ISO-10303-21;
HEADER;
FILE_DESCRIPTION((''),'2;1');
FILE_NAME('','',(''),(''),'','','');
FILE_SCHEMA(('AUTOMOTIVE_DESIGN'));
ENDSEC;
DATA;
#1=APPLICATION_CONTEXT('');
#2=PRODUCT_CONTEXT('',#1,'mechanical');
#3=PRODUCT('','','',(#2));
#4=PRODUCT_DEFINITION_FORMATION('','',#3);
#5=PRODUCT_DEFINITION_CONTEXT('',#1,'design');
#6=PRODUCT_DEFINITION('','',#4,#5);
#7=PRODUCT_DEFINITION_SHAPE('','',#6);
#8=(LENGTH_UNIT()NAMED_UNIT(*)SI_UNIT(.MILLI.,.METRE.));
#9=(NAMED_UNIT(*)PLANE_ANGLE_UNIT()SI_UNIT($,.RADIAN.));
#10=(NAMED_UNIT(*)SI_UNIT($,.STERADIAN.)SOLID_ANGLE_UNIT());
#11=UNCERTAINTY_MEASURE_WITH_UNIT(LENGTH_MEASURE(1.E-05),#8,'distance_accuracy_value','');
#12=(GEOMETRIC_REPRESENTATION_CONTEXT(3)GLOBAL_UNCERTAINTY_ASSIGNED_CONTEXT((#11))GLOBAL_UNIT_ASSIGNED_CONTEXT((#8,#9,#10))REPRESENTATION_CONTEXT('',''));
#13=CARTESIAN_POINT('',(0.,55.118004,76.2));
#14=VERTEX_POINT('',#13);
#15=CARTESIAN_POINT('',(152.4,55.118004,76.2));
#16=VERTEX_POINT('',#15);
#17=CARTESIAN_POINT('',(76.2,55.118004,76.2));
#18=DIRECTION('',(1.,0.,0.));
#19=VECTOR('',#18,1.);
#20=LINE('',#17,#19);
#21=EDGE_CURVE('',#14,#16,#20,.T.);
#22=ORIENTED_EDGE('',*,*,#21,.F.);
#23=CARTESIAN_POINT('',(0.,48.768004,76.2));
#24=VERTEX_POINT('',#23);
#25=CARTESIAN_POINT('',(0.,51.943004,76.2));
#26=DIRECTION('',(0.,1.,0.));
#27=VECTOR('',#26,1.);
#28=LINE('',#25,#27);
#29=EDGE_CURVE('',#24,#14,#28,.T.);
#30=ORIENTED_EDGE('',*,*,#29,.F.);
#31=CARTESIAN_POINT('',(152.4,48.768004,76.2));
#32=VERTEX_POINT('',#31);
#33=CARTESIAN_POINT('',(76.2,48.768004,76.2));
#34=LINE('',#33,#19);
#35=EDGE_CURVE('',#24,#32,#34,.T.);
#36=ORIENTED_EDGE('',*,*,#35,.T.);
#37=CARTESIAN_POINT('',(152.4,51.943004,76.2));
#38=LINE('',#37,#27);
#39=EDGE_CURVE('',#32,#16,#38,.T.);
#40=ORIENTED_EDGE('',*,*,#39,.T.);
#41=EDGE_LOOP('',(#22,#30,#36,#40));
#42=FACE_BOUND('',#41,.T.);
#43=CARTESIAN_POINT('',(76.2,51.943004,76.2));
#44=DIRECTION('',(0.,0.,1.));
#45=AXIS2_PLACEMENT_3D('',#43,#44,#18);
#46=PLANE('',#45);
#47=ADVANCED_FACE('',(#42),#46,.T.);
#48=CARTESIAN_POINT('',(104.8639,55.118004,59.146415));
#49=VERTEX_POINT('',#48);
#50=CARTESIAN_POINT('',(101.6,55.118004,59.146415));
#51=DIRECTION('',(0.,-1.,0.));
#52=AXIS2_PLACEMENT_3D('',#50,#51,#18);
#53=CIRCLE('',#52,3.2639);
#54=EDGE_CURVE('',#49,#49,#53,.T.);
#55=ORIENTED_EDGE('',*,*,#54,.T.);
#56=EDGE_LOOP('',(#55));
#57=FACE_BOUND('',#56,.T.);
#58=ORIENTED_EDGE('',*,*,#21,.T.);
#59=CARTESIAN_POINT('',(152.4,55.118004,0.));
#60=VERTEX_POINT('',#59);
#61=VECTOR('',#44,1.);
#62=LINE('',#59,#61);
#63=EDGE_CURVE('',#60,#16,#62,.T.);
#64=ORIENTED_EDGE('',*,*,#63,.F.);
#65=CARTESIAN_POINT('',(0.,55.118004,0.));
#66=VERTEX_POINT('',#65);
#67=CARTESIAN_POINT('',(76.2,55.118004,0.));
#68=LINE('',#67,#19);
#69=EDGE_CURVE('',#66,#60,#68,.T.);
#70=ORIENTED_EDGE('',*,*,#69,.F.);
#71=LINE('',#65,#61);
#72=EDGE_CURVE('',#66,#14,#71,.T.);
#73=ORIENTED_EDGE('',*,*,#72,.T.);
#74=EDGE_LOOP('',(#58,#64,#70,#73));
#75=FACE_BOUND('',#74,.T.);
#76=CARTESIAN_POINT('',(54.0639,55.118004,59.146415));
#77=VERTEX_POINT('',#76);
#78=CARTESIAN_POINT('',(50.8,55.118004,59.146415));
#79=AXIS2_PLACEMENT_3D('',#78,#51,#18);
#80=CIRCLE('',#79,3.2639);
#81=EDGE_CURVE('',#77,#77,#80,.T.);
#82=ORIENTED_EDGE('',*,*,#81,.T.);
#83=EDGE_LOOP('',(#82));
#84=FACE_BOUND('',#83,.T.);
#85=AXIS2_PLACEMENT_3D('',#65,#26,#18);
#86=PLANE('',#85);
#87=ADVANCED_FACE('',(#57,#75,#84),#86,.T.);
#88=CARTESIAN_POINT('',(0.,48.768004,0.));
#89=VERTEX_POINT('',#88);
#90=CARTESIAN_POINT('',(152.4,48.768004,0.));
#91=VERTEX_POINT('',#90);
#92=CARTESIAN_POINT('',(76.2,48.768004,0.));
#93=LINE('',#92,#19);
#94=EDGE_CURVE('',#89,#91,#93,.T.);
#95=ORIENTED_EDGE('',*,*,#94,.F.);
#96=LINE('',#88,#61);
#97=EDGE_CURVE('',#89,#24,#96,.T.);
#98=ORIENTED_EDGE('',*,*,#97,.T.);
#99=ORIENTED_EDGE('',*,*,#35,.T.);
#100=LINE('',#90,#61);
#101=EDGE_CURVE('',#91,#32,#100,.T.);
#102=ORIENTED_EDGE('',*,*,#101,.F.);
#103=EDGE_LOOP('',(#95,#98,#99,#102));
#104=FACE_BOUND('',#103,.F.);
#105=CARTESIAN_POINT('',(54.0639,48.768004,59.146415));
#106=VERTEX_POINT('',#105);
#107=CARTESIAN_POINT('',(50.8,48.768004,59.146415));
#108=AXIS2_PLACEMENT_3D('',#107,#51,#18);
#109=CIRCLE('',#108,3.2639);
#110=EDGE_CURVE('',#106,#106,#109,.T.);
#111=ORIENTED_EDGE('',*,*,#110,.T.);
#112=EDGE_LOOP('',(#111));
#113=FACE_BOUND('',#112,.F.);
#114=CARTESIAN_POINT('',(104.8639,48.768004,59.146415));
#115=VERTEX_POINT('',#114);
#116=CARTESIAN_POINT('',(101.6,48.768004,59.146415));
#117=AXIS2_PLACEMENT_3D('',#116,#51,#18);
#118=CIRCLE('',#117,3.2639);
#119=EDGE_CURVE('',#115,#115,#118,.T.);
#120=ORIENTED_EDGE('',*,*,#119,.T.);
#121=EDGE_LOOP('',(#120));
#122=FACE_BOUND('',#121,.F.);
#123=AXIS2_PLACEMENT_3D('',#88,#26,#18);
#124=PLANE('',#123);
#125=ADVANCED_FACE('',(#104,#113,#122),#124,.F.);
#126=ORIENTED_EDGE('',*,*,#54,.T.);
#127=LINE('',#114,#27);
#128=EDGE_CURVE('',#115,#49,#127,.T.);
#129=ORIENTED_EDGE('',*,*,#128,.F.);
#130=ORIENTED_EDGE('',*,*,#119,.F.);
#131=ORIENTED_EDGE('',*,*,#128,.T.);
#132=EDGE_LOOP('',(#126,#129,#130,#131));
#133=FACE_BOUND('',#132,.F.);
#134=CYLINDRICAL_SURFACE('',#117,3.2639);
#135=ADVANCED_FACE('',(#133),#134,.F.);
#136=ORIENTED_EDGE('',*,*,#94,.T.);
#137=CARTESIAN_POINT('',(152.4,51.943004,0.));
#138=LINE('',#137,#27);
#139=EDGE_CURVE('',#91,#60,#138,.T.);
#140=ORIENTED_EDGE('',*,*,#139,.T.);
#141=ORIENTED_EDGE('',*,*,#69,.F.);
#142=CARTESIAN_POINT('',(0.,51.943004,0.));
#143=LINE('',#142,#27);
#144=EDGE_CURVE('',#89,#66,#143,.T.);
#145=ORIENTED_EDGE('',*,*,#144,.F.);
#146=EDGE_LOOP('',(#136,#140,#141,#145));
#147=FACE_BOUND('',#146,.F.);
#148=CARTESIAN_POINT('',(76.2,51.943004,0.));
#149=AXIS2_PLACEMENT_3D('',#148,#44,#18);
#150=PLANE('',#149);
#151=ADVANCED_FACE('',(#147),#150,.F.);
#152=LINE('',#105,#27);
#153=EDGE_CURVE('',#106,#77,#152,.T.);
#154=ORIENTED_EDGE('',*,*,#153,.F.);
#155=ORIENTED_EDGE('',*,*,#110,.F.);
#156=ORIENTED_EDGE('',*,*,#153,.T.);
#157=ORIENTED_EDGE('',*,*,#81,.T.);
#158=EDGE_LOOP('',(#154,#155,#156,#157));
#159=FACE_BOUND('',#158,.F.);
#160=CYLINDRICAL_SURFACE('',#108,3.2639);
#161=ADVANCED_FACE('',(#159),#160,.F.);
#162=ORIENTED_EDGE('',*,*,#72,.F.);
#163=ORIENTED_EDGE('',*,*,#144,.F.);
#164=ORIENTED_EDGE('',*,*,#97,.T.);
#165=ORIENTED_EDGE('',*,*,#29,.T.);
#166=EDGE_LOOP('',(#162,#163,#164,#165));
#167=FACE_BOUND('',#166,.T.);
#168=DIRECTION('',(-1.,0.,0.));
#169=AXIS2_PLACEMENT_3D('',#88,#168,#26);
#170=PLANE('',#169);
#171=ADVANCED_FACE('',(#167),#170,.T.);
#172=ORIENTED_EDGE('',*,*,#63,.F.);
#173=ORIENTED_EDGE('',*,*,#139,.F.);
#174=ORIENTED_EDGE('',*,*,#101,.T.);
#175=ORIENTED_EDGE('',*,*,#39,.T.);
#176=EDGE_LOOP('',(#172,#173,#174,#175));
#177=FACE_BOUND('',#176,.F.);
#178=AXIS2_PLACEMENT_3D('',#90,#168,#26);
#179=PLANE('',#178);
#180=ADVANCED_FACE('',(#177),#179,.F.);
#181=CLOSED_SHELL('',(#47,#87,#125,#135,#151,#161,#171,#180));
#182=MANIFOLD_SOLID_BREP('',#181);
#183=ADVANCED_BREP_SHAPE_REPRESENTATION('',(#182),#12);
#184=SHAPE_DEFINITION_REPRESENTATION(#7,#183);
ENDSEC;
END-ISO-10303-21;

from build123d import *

# Parameters (mm, degrees)
F0_W     = 152.4
F0_H     = 6.35
F1_DEPTH = 76.2
F2_R     = 3.2639
F3_DEPTH = 6.351


# Not quite as in the source:
# - a feature names something its author has since deleted; it is built from what else it names


with BuildPart() as f1:
    # F0 (on Top) → F1 (new body)
    with BuildSketch(Plane.XY):
        with Locations((76.2, 51.9430038067)):
            Rectangle(F0_W, F0_H)
    extrude(amount=F1_DEPTH)

    # F2 (on face) → F3 (cut, through all)
    with BuildSketch(Plane.XZ.offset(-48.7680038067)):
        with Locations((101.6, 59.1464154422)):
            Circle(F2_R)
        with Locations((50.8, 59.1464154422)):
            Circle(F2_R)
    extrude(amount=-F3_DEPTH, mode=Mode.SUBTRACT)


solid = f1.part
